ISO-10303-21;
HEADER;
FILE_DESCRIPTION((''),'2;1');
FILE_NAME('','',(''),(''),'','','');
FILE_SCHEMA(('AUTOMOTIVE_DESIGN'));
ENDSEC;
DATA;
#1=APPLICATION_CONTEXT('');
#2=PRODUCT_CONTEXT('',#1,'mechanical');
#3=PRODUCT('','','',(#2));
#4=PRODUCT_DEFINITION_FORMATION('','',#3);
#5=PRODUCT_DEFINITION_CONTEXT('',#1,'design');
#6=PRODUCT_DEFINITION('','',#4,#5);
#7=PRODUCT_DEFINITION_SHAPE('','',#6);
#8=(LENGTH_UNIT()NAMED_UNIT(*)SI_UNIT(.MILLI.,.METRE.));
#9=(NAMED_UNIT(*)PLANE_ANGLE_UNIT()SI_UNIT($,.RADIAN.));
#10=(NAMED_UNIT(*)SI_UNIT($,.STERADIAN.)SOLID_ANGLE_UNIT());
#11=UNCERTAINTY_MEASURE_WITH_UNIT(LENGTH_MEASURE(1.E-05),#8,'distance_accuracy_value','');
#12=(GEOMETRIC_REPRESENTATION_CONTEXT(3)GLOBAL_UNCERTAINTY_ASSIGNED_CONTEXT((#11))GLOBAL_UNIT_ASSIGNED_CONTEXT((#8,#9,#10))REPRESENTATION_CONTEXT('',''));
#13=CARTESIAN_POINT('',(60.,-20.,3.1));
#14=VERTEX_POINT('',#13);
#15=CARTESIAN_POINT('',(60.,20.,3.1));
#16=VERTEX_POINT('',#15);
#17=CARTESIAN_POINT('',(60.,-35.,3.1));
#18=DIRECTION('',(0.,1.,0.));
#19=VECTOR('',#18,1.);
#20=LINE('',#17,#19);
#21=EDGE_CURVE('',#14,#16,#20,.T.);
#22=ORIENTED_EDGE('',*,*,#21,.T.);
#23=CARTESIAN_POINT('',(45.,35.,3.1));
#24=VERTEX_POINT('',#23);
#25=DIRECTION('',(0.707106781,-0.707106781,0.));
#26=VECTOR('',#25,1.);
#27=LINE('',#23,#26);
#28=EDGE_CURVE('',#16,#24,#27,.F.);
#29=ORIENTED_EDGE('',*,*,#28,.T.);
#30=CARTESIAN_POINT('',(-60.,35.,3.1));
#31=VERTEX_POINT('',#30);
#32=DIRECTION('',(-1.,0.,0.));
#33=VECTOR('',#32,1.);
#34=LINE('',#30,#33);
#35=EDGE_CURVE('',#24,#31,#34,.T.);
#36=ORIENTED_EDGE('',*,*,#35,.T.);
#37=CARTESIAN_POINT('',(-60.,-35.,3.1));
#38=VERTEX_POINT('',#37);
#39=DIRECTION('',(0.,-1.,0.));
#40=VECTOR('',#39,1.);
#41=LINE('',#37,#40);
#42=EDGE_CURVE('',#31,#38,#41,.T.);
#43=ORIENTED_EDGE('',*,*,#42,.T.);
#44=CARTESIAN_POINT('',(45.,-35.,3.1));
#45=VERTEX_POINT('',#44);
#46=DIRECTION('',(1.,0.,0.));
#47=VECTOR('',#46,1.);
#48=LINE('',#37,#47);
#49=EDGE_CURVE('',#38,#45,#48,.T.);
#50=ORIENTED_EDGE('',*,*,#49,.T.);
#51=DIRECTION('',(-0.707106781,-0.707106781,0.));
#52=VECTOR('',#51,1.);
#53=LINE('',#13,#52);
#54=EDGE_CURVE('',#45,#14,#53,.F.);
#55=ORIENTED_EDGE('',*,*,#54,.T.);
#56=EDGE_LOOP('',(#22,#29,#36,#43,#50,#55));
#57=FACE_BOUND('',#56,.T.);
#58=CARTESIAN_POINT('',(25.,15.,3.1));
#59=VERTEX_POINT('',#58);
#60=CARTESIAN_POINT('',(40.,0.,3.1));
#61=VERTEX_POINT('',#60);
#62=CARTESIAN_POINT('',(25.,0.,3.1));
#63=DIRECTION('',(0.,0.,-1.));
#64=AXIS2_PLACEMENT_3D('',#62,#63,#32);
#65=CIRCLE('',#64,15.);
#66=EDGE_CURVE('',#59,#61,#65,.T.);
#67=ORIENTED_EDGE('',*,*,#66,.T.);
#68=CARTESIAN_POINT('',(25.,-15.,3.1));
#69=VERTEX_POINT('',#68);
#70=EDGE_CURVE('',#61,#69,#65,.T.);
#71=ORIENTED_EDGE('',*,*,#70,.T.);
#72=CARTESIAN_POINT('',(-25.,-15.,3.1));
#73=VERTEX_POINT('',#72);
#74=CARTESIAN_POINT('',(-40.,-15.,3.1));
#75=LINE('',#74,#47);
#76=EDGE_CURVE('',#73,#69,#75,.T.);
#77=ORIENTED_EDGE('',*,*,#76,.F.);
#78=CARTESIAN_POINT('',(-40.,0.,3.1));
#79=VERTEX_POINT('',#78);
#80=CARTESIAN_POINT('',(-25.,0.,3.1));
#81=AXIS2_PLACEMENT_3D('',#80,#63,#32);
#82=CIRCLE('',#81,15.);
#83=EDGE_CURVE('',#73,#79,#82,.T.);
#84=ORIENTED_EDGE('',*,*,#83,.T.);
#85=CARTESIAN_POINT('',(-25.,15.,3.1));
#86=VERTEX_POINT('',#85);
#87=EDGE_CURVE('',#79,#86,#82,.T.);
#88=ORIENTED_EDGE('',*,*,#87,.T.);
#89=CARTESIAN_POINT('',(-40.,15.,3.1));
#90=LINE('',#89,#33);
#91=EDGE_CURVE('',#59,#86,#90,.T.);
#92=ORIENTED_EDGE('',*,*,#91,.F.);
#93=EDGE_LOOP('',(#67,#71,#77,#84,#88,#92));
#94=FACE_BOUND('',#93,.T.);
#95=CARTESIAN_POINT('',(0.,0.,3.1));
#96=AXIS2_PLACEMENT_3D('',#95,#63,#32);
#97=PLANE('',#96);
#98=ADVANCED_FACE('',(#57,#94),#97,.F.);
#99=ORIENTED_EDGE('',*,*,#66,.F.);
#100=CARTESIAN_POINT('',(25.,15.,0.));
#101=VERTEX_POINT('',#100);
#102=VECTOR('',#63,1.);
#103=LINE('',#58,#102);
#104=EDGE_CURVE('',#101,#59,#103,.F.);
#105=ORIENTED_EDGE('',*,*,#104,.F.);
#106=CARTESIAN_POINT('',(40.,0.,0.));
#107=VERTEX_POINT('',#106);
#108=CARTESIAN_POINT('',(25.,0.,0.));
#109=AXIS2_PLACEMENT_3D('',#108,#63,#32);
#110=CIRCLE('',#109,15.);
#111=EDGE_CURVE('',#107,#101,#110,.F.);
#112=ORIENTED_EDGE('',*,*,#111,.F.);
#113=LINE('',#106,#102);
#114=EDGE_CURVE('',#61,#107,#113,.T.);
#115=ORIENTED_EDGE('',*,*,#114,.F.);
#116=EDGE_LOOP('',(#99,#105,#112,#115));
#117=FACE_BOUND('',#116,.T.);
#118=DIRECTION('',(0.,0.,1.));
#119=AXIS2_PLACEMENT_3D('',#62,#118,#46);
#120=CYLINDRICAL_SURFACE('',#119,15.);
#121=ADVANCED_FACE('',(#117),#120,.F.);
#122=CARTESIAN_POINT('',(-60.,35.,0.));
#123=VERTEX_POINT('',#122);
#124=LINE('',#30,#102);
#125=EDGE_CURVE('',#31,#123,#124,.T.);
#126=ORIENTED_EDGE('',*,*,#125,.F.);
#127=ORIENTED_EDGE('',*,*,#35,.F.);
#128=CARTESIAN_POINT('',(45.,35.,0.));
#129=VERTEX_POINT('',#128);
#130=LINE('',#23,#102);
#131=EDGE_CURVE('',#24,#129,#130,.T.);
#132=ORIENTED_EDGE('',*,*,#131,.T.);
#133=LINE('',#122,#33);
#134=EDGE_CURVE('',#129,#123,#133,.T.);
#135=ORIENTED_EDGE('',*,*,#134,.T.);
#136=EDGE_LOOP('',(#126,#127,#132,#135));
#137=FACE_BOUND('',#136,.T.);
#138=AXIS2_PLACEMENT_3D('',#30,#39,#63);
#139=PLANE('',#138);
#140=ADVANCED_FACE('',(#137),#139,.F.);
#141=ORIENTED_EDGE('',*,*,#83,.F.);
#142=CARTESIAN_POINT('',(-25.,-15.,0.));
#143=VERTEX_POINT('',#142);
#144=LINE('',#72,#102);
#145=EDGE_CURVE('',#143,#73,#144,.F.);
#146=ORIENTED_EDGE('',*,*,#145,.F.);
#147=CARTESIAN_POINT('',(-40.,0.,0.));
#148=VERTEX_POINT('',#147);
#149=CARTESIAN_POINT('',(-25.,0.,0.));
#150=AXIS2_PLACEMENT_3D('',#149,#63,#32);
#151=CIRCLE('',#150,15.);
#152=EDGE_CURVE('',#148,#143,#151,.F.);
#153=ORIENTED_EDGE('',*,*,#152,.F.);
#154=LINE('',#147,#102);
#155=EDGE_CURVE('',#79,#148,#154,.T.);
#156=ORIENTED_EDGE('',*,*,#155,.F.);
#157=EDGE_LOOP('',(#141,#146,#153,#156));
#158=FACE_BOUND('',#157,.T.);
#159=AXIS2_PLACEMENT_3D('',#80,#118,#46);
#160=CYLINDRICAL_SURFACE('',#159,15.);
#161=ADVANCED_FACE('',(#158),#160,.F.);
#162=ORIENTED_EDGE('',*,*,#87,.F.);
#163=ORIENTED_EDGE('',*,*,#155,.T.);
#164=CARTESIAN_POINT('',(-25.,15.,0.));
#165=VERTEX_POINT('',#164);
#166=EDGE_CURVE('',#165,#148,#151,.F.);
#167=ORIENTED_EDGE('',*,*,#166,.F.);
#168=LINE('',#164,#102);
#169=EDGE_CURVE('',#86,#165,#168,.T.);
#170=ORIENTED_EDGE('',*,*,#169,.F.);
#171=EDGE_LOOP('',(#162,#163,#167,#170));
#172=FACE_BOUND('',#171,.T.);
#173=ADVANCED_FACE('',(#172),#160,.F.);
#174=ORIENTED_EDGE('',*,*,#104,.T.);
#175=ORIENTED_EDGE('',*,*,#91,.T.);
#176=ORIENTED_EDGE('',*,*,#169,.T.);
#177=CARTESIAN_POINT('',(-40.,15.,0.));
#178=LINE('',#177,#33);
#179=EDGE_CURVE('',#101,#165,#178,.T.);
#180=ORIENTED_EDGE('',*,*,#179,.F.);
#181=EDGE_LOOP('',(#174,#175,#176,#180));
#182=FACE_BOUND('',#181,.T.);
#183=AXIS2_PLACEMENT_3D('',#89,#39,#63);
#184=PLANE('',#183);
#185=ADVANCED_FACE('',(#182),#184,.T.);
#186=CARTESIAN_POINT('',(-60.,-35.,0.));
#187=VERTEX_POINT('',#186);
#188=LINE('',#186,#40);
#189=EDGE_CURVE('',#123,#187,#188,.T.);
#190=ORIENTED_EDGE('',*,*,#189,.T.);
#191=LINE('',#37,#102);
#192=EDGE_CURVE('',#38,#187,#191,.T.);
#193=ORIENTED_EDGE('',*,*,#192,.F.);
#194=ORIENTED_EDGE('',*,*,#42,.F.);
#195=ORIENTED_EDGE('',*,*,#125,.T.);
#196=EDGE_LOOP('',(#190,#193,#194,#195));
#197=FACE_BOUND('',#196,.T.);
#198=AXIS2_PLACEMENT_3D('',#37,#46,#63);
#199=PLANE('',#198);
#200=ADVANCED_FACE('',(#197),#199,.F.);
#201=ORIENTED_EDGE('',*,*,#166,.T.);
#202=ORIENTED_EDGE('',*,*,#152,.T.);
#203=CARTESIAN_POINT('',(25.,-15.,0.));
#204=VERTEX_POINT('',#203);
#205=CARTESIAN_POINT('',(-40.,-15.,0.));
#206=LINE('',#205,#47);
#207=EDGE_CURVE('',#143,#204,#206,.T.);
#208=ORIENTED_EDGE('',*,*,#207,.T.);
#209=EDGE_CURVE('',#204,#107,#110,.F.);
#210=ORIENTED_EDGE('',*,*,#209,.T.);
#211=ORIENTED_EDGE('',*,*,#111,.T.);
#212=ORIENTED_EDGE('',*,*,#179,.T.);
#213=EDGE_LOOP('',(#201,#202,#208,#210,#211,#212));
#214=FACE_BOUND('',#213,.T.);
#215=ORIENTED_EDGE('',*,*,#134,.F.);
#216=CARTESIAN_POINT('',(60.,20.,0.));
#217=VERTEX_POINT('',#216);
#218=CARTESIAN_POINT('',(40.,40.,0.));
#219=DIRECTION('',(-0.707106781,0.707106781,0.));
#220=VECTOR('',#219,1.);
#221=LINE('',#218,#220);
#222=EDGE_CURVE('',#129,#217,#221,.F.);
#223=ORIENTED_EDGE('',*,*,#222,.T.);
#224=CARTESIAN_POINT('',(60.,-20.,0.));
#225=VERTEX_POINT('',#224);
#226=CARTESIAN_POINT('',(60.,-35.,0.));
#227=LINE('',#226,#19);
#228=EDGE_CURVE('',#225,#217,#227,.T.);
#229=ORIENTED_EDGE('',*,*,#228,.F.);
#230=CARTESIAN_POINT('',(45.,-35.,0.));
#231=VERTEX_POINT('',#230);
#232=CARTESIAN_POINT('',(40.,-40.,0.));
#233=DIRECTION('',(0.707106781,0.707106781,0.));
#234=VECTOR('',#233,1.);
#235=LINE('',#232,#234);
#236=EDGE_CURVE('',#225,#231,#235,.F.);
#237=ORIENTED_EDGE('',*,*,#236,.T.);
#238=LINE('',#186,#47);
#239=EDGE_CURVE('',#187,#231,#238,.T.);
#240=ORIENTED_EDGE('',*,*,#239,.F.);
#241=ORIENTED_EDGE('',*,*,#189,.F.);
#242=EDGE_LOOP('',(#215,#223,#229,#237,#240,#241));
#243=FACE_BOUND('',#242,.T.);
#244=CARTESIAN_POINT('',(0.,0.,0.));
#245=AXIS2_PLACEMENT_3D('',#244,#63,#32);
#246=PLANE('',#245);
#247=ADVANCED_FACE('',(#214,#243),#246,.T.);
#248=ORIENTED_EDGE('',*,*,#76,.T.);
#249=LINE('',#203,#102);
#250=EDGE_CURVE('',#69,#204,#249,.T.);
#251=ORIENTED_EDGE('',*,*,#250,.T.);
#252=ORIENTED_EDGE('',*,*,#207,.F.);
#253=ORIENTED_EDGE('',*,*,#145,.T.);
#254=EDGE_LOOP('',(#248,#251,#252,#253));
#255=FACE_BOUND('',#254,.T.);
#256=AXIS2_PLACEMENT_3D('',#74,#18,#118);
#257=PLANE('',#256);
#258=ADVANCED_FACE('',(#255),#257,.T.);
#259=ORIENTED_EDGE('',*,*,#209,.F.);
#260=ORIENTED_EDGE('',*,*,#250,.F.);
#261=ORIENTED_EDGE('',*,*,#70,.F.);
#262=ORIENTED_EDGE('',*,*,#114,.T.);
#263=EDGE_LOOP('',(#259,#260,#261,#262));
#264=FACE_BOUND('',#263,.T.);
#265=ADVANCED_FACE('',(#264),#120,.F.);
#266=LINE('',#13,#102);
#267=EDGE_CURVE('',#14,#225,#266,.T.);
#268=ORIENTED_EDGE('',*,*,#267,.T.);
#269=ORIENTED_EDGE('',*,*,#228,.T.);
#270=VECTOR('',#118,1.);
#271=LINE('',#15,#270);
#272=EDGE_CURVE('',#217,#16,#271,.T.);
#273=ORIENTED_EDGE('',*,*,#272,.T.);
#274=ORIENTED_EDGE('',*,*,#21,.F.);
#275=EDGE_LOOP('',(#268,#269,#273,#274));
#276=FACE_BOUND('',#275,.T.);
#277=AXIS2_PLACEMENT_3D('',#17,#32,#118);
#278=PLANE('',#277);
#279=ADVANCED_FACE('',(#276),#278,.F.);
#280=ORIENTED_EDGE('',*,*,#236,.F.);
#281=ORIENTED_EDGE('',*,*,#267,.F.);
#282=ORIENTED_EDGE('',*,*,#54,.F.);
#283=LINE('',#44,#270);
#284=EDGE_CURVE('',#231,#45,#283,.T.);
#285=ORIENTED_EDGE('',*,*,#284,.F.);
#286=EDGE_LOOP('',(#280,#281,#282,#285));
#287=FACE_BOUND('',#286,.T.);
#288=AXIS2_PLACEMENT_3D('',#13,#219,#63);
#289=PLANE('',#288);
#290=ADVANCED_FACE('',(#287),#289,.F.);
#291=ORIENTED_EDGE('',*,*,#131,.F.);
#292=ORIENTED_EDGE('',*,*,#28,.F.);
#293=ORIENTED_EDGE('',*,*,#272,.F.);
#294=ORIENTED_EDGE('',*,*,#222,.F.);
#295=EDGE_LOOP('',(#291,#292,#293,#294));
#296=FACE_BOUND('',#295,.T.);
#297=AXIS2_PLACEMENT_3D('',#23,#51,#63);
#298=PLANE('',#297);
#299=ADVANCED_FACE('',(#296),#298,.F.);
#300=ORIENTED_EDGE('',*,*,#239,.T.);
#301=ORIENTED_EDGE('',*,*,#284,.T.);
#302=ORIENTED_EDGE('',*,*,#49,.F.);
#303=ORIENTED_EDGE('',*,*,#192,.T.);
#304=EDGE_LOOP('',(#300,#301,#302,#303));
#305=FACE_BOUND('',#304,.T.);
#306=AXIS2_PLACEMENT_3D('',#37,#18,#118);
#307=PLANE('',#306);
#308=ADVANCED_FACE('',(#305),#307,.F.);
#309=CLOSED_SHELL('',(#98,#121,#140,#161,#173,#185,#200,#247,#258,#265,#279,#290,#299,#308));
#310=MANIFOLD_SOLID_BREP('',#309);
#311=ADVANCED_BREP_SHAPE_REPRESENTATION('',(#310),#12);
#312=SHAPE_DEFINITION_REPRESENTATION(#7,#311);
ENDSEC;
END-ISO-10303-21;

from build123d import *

# Parameters (mm, degrees)
SKETCH1_W           = 120
SKETCH1_H           = 70
SKETCH1_W_2         = 80
SKETCH1_H_2         = 30
BOSS_EXTRUDE1_DEPTH = 3.1
FILLET1_R           = 15
CHAMFER1_SIZE       = 15


with BuildPart() as part:
    # Sketch1 → Boss-Extrude1 (new body)
    with BuildSketch(Plane.XY):
        Rectangle(SKETCH1_W, SKETCH1_H)
        Rectangle(SKETCH1_W_2, SKETCH1_H_2, mode=Mode.SUBTRACT)
    extrude(amount=BOSS_EXTRUDE1_DEPTH)

    # Fillet1
    fillet1_edges = [part.edges().sort_by_distance(p)[0] for p in [
        (40, -15, 1.55),
        (40, 15, 1.55),
        (-40, 15, 1.55),
        (-40, -15, 1.55),
    ]]
    fillet(fillet1_edges, radius=FILLET1_R - 0.0001)  # a hair under: the kernel refuses the full size

    # Chamfer1
    chamfer1_edges = [part.edges().sort_by_distance(p)[0] for p in [
        (60, -35, 1.55),
        (60, 35, 1.55),
    ]]
    chamfer(chamfer1_edges, length=CHAMFER1_SIZE)


solid = part.part
